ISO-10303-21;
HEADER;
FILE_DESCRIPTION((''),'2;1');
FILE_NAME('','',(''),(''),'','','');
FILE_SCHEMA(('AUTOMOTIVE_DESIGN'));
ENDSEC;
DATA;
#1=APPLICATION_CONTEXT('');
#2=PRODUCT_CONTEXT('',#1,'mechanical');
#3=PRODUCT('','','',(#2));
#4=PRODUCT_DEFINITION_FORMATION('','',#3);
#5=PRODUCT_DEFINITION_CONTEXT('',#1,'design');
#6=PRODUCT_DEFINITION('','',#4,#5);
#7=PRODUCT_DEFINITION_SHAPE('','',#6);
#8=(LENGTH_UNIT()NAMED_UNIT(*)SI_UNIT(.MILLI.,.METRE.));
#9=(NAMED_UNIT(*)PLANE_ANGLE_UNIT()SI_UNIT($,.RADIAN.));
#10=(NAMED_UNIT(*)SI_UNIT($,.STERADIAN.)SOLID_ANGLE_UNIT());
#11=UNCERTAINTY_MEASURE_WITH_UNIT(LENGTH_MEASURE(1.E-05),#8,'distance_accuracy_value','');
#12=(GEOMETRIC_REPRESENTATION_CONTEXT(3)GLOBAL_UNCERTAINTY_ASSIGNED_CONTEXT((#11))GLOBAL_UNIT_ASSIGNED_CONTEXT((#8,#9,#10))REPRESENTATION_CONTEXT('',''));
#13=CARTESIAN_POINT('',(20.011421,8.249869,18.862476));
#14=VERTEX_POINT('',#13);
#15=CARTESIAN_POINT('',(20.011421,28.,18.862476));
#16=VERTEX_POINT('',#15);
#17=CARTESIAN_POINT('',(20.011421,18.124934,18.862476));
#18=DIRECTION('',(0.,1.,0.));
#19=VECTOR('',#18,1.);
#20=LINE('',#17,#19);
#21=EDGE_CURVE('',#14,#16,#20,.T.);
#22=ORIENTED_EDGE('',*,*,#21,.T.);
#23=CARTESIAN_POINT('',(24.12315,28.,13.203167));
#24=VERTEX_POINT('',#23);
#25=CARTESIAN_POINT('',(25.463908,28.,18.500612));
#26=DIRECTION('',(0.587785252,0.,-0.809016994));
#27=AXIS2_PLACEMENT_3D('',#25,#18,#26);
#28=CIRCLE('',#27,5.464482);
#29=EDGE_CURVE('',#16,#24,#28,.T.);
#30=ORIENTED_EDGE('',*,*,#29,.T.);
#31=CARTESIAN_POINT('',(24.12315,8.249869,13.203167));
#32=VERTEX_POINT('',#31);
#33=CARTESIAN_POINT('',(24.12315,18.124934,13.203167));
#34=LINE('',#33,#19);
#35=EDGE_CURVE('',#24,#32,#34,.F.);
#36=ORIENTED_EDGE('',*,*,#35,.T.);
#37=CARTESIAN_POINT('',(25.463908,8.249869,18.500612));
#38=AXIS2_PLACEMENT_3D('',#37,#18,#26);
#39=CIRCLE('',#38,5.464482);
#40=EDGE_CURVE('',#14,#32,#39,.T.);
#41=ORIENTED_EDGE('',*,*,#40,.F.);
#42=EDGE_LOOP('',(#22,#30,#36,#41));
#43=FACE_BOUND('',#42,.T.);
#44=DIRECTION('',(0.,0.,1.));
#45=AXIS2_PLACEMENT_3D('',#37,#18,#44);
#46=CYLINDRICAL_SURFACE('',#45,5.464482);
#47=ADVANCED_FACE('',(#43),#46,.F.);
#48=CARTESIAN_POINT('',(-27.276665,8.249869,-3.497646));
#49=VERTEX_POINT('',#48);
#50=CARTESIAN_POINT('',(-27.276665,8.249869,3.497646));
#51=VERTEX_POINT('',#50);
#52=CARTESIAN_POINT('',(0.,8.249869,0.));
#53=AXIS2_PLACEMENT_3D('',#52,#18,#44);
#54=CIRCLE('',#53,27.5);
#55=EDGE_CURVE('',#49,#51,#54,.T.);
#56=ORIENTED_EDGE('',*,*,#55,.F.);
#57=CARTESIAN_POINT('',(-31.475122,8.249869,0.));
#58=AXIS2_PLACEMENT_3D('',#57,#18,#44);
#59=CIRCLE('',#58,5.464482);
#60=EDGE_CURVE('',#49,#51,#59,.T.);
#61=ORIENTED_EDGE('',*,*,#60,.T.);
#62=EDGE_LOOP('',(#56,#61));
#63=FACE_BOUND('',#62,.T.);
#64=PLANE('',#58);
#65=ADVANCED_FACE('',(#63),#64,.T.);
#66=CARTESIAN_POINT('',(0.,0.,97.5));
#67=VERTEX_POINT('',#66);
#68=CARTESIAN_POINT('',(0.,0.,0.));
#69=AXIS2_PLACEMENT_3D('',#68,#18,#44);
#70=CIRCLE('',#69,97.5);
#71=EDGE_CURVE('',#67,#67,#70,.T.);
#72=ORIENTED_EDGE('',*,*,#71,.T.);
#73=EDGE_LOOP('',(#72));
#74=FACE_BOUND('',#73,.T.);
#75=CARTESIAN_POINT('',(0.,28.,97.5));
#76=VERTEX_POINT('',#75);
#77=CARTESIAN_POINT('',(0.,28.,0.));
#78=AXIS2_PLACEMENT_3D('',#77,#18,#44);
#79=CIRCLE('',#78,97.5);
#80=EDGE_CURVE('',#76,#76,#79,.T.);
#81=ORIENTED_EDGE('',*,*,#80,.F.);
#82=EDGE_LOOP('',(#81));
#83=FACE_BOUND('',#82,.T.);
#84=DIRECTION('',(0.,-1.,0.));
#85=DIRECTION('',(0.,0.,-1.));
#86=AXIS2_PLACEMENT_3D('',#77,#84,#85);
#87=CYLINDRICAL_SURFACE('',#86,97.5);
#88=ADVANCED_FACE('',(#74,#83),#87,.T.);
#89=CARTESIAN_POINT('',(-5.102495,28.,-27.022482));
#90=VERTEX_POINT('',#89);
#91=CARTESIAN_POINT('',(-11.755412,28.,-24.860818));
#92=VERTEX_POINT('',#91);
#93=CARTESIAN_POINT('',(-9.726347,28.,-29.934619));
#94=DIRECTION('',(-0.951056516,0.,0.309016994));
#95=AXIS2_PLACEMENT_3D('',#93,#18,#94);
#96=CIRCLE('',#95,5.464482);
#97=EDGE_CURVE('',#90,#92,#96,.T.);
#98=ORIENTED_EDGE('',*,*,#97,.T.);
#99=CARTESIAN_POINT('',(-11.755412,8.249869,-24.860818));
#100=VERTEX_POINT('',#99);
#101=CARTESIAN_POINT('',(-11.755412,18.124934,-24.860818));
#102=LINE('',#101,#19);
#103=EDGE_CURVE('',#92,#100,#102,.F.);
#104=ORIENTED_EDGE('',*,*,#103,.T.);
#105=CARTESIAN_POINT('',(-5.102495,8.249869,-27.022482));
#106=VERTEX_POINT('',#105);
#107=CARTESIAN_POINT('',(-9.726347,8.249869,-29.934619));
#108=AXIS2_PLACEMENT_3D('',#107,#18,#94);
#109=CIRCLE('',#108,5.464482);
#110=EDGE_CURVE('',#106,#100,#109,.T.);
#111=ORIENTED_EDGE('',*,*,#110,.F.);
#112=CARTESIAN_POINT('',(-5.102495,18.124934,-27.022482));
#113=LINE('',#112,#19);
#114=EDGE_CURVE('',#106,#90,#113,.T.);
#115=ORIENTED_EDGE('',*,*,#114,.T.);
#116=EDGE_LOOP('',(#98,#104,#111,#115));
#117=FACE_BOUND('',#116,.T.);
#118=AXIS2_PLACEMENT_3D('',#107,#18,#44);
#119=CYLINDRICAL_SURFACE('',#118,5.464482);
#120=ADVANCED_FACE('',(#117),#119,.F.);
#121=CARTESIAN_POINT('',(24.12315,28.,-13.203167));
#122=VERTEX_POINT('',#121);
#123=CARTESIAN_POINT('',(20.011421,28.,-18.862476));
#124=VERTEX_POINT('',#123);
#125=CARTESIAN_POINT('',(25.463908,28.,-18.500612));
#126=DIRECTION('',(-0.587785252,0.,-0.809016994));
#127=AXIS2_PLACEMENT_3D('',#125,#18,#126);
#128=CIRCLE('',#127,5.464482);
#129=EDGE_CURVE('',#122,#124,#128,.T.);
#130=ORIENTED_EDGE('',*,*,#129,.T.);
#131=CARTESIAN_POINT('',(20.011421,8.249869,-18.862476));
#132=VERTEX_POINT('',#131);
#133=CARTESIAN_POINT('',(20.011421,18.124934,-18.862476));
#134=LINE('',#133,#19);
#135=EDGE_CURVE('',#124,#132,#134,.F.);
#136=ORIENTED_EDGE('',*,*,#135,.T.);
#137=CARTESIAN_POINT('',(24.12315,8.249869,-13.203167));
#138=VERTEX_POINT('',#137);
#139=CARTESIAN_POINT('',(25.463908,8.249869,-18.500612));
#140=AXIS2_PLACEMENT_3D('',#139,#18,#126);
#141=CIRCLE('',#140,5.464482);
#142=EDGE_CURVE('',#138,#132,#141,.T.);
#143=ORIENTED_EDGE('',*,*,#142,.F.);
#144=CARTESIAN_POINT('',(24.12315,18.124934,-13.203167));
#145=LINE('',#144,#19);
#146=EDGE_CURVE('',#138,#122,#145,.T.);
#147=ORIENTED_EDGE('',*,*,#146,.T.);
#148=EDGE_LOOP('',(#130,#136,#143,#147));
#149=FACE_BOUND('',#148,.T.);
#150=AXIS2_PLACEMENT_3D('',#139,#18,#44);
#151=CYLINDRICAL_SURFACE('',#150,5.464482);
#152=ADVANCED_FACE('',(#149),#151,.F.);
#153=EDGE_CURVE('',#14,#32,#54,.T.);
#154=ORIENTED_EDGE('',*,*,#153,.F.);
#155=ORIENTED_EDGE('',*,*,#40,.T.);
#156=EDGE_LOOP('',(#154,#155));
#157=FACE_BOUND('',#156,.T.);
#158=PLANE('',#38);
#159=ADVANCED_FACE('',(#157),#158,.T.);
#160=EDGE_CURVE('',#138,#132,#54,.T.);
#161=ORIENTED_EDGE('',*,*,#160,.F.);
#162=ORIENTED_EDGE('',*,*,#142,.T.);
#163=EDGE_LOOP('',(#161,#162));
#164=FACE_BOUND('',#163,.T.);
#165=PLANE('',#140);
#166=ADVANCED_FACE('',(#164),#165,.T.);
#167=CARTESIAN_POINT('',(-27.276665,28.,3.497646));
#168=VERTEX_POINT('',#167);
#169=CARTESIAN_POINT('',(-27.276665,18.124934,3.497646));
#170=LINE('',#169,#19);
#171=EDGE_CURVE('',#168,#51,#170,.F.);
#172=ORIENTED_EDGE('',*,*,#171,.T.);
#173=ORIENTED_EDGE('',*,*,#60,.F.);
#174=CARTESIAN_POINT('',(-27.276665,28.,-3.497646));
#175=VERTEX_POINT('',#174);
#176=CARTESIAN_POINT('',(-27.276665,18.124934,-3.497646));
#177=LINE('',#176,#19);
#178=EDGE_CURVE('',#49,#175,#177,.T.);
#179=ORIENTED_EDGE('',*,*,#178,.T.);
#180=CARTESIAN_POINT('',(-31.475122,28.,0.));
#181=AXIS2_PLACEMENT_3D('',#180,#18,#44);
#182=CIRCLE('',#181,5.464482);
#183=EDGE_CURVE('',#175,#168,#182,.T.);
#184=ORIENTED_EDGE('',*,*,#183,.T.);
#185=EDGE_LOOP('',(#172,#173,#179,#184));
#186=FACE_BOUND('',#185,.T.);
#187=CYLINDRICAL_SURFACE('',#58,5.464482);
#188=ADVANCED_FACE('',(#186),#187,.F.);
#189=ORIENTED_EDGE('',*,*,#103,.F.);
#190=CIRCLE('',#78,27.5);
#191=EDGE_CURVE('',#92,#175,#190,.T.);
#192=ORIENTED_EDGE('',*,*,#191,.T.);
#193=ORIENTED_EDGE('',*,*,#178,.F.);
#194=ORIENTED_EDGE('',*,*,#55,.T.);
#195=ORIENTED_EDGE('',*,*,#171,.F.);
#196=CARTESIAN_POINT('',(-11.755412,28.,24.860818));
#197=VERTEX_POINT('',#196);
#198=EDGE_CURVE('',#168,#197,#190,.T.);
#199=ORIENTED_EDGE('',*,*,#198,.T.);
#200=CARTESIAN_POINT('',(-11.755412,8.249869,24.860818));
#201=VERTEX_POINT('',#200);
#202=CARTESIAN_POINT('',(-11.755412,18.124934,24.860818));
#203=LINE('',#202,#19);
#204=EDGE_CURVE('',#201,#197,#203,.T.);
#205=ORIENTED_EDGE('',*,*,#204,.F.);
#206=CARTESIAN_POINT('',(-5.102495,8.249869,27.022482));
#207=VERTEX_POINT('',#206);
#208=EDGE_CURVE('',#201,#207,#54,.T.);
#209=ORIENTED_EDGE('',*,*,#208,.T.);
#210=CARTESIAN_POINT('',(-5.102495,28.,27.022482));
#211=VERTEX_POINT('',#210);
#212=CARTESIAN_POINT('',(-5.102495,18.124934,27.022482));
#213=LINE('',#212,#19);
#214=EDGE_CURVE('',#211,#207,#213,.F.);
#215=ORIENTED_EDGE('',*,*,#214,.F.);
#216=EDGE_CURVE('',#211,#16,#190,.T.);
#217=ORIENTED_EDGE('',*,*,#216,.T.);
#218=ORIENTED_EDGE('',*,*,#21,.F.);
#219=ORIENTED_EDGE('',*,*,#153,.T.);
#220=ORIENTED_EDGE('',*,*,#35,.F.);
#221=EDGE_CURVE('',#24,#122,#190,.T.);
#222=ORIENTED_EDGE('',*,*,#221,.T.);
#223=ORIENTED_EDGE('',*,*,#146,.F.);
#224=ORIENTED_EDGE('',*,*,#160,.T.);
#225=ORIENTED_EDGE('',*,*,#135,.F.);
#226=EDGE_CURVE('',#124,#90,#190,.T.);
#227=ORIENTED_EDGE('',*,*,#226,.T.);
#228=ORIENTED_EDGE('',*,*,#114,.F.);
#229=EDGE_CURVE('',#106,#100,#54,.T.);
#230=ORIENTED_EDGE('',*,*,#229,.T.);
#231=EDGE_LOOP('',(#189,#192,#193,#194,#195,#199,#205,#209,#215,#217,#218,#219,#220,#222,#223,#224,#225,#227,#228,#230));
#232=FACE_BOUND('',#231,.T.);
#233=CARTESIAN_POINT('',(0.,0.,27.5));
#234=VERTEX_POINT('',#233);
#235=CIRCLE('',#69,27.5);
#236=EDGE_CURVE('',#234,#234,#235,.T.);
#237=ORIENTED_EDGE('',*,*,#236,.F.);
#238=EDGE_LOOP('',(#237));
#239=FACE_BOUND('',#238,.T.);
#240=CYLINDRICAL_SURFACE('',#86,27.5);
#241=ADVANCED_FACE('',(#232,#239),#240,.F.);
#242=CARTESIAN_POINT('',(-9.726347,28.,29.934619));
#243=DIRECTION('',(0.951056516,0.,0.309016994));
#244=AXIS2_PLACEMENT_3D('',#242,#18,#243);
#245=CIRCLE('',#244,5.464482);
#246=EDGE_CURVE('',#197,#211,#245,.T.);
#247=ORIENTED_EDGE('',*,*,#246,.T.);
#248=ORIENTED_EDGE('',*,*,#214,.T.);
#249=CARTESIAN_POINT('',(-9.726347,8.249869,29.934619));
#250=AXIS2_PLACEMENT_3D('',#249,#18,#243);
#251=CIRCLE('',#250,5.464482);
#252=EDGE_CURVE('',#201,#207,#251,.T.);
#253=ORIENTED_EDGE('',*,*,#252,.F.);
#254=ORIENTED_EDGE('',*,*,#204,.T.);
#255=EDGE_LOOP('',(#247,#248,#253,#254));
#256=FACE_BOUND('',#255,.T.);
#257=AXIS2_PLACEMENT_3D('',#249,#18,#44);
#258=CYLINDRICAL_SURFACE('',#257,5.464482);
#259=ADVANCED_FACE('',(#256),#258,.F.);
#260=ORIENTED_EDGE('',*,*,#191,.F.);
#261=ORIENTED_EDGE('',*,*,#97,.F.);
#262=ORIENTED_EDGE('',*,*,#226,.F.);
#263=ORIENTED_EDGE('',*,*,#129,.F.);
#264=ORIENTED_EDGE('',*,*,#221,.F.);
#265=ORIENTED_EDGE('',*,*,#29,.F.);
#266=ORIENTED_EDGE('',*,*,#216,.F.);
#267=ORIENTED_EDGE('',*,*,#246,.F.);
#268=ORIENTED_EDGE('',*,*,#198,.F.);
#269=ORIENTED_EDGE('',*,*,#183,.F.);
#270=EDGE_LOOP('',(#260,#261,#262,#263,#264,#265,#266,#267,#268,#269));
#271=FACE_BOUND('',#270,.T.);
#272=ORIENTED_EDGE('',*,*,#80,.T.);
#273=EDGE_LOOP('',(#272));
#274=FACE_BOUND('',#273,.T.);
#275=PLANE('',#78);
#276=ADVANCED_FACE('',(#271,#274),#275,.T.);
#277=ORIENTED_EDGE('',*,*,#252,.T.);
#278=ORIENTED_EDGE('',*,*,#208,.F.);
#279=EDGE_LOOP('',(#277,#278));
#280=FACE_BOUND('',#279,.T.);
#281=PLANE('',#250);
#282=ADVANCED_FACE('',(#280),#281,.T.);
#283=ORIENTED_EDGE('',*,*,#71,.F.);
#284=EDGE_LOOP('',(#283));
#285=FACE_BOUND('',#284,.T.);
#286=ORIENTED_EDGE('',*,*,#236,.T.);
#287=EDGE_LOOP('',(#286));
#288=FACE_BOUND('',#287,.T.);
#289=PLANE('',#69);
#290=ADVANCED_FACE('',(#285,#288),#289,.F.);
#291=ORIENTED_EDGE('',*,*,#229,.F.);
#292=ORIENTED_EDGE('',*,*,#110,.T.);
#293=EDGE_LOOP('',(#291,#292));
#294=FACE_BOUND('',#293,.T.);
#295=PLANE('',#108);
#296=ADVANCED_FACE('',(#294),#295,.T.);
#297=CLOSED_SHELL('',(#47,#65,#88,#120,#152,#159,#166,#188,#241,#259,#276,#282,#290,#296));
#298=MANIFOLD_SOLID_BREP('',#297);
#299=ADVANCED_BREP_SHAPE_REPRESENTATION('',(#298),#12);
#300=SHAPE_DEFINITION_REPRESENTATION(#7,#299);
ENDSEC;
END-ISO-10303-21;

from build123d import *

# Parameters (mm, degrees)
SKETCH1_R           = 97.5
BOSS_EXTRUDE1_DEPTH = 28
SKETCH2_R           = 27.5
CUT_EXTRUDE1_DEPTH  = 141.700035537
SKETCH3_R           = 5.464481516
CUT_EXTRUDE2_DEPTH  = 19.750131391
CIRPATTERN1_COUNT   = 5


with BuildPart() as part:
    # Sketch1 → Boss-Extrude1 (new body)
    with BuildSketch(Plane(origin=(0, 0, 0), x_dir=(1, 0, 0), z_dir=(0, 1, 0))):
        Circle(SKETCH1_R)
    extrude(amount=BOSS_EXTRUDE1_DEPTH)

    # Sketch2 → Cut-Extrude1 (cut, through all)
    with BuildSketch(Plane(origin=(0, 0, 0), x_dir=(1, 0, 0), z_dir=(0, 1, 0))):
        Circle(SKETCH2_R)
    extrude(amount=CUT_EXTRUDE1_DEPTH, mode=Mode.SUBTRACT)

    # Sketch3 → Cut-Extrude2 (cut)
    with BuildSketch(Plane(origin=(0, 28, 0), x_dir=(1, 0, 0), z_dir=(0, 1, 0))):
        with Locations((-31.475121573, 0)):
            Circle(SKETCH3_R)
    cut_extrude2 = extrude(amount=-CUT_EXTRUDE2_DEPTH, mode=Mode.SUBTRACT)

    # CirPattern1: Cut-Extrude2 ×5 about axis
    cirpattern1_axis = Axis((0, 0, 0), (0, 1, 0))
    for i in range(1, CIRPATTERN1_COUNT):
        add(cut_extrude2.rotate(cirpattern1_axis, i * 360 / CIRPATTERN1_COUNT), mode=Mode.SUBTRACT)


solid = part.part
